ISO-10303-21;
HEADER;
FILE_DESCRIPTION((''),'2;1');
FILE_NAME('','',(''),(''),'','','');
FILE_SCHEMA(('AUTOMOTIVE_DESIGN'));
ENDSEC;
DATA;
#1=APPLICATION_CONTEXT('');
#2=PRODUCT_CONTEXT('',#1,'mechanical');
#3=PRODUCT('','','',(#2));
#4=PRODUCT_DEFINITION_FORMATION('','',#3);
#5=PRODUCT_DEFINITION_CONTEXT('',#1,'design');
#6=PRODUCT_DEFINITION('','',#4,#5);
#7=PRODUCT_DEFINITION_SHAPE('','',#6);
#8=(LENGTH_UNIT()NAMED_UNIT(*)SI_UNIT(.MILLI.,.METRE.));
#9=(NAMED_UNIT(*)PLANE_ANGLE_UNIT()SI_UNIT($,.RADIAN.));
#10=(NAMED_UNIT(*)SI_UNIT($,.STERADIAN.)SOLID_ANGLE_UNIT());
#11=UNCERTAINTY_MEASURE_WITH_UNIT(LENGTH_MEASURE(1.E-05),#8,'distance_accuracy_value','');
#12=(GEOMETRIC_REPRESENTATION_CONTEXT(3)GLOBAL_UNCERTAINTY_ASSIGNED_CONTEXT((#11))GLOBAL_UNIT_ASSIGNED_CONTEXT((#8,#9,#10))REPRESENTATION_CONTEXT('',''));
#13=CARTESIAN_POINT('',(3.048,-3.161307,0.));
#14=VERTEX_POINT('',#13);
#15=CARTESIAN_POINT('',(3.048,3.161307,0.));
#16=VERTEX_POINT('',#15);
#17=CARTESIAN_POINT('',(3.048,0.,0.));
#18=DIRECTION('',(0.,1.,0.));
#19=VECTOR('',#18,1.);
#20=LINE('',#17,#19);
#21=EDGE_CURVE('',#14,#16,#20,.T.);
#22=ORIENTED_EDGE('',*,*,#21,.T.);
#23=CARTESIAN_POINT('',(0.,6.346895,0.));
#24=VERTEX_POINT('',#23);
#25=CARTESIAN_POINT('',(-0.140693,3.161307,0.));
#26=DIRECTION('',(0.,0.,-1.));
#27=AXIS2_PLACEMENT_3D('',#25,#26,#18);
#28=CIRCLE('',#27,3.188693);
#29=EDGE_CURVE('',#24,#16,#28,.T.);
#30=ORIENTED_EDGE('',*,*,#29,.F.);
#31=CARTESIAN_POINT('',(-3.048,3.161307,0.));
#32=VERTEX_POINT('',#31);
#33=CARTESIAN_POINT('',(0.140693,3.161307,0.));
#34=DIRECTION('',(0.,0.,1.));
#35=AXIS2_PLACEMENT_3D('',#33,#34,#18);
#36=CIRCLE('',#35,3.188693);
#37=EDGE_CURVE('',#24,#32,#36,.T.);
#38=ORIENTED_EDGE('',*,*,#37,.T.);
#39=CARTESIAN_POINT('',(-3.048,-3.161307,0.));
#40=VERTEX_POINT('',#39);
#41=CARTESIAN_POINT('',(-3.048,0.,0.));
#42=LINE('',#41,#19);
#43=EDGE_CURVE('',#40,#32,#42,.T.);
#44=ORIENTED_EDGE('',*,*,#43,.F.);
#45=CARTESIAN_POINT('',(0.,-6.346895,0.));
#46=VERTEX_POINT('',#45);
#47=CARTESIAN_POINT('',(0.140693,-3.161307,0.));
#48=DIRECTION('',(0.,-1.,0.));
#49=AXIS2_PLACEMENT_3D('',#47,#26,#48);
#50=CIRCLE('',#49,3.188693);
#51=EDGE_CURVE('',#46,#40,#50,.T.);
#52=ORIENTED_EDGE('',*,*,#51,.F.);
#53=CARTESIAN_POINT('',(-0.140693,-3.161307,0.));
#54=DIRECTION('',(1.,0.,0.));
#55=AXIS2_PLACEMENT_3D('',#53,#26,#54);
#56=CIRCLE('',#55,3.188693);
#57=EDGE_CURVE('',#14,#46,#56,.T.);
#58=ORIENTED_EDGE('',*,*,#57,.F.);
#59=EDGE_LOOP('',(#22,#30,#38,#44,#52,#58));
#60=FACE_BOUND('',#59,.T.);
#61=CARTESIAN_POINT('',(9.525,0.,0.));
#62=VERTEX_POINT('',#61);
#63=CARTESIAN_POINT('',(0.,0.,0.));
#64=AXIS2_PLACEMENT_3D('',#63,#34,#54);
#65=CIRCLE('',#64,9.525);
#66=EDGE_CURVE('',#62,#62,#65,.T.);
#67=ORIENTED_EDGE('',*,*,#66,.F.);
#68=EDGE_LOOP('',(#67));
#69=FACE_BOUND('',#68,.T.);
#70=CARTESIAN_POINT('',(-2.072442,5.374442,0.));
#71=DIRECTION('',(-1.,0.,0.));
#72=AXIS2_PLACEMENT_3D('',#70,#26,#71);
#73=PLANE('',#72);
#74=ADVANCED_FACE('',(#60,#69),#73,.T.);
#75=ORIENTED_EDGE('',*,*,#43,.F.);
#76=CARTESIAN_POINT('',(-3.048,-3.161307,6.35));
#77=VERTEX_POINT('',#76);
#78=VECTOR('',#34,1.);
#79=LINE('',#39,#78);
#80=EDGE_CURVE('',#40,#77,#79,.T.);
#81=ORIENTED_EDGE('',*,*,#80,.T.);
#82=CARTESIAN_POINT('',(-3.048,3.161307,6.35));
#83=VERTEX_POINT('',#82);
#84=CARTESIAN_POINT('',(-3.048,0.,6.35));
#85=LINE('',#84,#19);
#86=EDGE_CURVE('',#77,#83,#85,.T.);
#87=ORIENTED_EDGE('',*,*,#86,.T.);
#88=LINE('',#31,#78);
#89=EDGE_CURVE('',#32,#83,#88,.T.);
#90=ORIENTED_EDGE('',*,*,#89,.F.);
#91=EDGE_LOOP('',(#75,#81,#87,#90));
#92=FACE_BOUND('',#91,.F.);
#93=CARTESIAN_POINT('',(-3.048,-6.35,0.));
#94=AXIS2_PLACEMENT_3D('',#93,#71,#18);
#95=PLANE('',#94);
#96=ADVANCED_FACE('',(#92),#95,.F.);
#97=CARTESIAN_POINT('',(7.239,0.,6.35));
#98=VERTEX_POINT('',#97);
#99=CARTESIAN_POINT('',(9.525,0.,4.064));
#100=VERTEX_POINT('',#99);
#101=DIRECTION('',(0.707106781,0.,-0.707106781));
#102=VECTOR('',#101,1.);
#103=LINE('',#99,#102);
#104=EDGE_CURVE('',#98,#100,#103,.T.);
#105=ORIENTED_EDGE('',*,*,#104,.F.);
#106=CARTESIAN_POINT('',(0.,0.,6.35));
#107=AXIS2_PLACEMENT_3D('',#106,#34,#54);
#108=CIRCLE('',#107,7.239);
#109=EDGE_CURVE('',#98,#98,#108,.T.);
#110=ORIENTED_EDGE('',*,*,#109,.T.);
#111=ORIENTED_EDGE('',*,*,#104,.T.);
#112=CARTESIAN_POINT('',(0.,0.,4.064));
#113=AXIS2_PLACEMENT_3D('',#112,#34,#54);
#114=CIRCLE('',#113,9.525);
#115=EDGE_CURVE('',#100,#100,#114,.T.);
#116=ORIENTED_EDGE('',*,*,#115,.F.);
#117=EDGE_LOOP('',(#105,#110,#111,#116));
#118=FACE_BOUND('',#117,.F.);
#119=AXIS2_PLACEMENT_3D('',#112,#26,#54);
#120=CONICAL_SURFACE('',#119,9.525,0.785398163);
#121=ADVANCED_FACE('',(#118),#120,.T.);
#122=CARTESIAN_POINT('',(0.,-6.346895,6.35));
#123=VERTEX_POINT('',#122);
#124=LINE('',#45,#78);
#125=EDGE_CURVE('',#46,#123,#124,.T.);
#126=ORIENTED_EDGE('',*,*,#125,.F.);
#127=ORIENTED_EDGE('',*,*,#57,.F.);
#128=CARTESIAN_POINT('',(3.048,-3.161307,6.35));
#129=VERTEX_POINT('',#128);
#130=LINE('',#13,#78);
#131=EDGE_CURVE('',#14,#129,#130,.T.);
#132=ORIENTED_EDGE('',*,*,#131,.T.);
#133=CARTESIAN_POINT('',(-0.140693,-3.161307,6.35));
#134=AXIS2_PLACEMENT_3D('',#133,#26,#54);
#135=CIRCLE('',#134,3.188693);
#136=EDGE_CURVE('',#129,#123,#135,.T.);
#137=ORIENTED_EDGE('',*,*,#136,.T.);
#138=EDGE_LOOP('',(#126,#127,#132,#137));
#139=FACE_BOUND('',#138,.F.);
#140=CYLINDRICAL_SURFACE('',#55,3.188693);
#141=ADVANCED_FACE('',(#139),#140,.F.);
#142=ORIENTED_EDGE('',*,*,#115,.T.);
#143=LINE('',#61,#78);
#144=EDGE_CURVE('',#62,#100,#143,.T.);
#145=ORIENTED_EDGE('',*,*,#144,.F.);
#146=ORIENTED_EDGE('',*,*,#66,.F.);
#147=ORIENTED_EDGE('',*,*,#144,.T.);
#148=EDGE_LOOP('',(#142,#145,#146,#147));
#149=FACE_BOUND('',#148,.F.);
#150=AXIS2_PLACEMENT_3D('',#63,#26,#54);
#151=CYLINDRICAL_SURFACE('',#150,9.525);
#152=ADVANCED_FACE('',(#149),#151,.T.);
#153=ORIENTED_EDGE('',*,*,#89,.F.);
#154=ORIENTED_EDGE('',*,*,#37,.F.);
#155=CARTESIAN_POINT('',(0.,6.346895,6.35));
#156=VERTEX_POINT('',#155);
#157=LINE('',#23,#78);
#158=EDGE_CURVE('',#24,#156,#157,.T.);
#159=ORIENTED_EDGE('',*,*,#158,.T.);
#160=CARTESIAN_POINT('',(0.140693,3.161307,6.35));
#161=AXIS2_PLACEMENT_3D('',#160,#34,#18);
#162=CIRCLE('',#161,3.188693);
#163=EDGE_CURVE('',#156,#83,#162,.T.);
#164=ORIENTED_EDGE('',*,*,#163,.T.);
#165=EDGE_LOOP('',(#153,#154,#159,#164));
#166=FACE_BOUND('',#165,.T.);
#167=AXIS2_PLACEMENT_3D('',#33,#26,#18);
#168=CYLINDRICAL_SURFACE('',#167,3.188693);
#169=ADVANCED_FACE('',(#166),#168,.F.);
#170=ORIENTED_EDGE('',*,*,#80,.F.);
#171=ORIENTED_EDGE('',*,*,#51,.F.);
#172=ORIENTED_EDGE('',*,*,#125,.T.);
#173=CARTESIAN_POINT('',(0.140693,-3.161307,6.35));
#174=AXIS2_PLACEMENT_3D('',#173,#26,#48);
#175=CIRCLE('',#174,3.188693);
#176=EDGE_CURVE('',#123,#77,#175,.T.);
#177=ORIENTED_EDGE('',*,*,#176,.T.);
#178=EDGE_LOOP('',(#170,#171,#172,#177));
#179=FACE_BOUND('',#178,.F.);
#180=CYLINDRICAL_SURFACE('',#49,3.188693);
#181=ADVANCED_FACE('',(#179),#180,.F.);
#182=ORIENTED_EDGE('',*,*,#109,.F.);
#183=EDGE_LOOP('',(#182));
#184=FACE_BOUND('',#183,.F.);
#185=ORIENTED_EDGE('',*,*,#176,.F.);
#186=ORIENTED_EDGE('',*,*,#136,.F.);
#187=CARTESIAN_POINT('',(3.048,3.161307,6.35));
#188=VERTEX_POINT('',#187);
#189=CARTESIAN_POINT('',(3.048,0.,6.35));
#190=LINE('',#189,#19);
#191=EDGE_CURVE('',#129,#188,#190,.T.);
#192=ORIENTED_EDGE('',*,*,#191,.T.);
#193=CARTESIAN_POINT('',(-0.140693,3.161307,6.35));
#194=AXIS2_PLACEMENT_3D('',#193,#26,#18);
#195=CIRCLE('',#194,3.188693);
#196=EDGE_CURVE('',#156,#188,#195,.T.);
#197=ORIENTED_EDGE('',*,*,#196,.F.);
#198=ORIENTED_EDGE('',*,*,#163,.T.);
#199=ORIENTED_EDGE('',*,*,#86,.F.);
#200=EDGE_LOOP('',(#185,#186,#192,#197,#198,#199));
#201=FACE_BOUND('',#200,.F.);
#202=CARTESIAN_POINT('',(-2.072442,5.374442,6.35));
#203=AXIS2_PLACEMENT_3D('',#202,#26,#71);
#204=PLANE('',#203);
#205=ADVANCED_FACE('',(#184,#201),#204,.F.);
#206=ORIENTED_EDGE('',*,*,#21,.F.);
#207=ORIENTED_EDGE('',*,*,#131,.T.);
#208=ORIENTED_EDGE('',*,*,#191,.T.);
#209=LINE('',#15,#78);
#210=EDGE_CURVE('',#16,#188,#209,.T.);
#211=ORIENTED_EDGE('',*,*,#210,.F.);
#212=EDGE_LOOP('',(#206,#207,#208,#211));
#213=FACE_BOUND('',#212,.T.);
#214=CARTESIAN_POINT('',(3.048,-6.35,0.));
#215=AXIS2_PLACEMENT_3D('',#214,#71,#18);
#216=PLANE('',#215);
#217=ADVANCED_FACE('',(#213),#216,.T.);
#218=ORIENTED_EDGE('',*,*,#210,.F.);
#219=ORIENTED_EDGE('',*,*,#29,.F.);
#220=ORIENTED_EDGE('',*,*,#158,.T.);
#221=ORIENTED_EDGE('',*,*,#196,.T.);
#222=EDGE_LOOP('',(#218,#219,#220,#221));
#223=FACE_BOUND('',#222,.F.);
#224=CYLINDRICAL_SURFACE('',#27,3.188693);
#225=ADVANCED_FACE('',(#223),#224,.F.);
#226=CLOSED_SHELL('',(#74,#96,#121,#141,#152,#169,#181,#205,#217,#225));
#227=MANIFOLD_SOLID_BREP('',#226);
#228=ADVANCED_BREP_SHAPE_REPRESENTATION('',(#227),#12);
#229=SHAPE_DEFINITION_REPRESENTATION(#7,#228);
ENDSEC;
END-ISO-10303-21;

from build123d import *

# Parameters (mm, degrees)
F0_R        = 9.525
F0_W        = 6.096
F0_H        = 12.7
F1_DEPTH    = 6.35
F2_T1_DEPTH = 6.35
F3_SIZE     = 2.286


# Not quite as in the source:
# - a fillet or chamfer that OpenCascade refuses, or shapes differently, is made with other operations: its cross-section is extruded or revolved along the edge and cut away or added


with BuildPart() as f1:
    # F0 (on Top) → F1 (new body)
    with BuildSketch(Plane.XY):
        Circle(F0_R)
        Rectangle(F0_W, F0_H, mode=Mode.SUBTRACT)
    extrude(amount=F1_DEPTH)

    # F2: fillet of radius 3.1886932732 on 4 edges, made by hand

    # F2_s2 → F2_t1 (join)
    with BuildSketch(Plane.XY):
        with BuildLine():
            ThreePointArc((0.1406932732, 6.35), (-2.1140533634, 5.4160533634), (-3.048, 3.1613067268))
            Line((-3.048, 3.1613067268), (-3.048, 6.35))
            Line((-3.048, 6.35), (0.1406932732, 6.35))
        make_face()
        with BuildLine():
            ThreePointArc((-0.1406932732, 6.35), (2.1140533634, 5.4160533634), (3.048, 3.1613067268))
            Line((3.048, 3.1613067268), (3.048, 6.35))
            Line((3.048, 6.35), (-0.1406932732, 6.35))
        make_face()
        with BuildLine():
            ThreePointArc((0.1406932732, -6.35), (-2.1140533634, -5.4160533634), (-3.048, -3.1613067268))
            Line((-3.048, -3.1613067268), (-3.048, -6.35))
            Line((-3.048, -6.35), (0.1406932732, -6.35))
        make_face()
        with BuildLine():
            ThreePointArc((3.048, -3.1613067268), (2.1140533634, -5.4160533634), (-0.1406932732, -6.35))
            Line((-0.1406932732, -6.35), (3.048, -6.35))
            Line((3.048, -6.35), (3.048, -3.1613067268))
        make_face()
    extrude(amount=F2_T1_DEPTH)

    # F3
    f3_edges = [f1.edges().sort_by_distance(p)[0] for p in [
        (-9.525, 0, 6.35),
    ]]
    chamfer(f3_edges, length=F3_SIZE)


solid = f1.part
